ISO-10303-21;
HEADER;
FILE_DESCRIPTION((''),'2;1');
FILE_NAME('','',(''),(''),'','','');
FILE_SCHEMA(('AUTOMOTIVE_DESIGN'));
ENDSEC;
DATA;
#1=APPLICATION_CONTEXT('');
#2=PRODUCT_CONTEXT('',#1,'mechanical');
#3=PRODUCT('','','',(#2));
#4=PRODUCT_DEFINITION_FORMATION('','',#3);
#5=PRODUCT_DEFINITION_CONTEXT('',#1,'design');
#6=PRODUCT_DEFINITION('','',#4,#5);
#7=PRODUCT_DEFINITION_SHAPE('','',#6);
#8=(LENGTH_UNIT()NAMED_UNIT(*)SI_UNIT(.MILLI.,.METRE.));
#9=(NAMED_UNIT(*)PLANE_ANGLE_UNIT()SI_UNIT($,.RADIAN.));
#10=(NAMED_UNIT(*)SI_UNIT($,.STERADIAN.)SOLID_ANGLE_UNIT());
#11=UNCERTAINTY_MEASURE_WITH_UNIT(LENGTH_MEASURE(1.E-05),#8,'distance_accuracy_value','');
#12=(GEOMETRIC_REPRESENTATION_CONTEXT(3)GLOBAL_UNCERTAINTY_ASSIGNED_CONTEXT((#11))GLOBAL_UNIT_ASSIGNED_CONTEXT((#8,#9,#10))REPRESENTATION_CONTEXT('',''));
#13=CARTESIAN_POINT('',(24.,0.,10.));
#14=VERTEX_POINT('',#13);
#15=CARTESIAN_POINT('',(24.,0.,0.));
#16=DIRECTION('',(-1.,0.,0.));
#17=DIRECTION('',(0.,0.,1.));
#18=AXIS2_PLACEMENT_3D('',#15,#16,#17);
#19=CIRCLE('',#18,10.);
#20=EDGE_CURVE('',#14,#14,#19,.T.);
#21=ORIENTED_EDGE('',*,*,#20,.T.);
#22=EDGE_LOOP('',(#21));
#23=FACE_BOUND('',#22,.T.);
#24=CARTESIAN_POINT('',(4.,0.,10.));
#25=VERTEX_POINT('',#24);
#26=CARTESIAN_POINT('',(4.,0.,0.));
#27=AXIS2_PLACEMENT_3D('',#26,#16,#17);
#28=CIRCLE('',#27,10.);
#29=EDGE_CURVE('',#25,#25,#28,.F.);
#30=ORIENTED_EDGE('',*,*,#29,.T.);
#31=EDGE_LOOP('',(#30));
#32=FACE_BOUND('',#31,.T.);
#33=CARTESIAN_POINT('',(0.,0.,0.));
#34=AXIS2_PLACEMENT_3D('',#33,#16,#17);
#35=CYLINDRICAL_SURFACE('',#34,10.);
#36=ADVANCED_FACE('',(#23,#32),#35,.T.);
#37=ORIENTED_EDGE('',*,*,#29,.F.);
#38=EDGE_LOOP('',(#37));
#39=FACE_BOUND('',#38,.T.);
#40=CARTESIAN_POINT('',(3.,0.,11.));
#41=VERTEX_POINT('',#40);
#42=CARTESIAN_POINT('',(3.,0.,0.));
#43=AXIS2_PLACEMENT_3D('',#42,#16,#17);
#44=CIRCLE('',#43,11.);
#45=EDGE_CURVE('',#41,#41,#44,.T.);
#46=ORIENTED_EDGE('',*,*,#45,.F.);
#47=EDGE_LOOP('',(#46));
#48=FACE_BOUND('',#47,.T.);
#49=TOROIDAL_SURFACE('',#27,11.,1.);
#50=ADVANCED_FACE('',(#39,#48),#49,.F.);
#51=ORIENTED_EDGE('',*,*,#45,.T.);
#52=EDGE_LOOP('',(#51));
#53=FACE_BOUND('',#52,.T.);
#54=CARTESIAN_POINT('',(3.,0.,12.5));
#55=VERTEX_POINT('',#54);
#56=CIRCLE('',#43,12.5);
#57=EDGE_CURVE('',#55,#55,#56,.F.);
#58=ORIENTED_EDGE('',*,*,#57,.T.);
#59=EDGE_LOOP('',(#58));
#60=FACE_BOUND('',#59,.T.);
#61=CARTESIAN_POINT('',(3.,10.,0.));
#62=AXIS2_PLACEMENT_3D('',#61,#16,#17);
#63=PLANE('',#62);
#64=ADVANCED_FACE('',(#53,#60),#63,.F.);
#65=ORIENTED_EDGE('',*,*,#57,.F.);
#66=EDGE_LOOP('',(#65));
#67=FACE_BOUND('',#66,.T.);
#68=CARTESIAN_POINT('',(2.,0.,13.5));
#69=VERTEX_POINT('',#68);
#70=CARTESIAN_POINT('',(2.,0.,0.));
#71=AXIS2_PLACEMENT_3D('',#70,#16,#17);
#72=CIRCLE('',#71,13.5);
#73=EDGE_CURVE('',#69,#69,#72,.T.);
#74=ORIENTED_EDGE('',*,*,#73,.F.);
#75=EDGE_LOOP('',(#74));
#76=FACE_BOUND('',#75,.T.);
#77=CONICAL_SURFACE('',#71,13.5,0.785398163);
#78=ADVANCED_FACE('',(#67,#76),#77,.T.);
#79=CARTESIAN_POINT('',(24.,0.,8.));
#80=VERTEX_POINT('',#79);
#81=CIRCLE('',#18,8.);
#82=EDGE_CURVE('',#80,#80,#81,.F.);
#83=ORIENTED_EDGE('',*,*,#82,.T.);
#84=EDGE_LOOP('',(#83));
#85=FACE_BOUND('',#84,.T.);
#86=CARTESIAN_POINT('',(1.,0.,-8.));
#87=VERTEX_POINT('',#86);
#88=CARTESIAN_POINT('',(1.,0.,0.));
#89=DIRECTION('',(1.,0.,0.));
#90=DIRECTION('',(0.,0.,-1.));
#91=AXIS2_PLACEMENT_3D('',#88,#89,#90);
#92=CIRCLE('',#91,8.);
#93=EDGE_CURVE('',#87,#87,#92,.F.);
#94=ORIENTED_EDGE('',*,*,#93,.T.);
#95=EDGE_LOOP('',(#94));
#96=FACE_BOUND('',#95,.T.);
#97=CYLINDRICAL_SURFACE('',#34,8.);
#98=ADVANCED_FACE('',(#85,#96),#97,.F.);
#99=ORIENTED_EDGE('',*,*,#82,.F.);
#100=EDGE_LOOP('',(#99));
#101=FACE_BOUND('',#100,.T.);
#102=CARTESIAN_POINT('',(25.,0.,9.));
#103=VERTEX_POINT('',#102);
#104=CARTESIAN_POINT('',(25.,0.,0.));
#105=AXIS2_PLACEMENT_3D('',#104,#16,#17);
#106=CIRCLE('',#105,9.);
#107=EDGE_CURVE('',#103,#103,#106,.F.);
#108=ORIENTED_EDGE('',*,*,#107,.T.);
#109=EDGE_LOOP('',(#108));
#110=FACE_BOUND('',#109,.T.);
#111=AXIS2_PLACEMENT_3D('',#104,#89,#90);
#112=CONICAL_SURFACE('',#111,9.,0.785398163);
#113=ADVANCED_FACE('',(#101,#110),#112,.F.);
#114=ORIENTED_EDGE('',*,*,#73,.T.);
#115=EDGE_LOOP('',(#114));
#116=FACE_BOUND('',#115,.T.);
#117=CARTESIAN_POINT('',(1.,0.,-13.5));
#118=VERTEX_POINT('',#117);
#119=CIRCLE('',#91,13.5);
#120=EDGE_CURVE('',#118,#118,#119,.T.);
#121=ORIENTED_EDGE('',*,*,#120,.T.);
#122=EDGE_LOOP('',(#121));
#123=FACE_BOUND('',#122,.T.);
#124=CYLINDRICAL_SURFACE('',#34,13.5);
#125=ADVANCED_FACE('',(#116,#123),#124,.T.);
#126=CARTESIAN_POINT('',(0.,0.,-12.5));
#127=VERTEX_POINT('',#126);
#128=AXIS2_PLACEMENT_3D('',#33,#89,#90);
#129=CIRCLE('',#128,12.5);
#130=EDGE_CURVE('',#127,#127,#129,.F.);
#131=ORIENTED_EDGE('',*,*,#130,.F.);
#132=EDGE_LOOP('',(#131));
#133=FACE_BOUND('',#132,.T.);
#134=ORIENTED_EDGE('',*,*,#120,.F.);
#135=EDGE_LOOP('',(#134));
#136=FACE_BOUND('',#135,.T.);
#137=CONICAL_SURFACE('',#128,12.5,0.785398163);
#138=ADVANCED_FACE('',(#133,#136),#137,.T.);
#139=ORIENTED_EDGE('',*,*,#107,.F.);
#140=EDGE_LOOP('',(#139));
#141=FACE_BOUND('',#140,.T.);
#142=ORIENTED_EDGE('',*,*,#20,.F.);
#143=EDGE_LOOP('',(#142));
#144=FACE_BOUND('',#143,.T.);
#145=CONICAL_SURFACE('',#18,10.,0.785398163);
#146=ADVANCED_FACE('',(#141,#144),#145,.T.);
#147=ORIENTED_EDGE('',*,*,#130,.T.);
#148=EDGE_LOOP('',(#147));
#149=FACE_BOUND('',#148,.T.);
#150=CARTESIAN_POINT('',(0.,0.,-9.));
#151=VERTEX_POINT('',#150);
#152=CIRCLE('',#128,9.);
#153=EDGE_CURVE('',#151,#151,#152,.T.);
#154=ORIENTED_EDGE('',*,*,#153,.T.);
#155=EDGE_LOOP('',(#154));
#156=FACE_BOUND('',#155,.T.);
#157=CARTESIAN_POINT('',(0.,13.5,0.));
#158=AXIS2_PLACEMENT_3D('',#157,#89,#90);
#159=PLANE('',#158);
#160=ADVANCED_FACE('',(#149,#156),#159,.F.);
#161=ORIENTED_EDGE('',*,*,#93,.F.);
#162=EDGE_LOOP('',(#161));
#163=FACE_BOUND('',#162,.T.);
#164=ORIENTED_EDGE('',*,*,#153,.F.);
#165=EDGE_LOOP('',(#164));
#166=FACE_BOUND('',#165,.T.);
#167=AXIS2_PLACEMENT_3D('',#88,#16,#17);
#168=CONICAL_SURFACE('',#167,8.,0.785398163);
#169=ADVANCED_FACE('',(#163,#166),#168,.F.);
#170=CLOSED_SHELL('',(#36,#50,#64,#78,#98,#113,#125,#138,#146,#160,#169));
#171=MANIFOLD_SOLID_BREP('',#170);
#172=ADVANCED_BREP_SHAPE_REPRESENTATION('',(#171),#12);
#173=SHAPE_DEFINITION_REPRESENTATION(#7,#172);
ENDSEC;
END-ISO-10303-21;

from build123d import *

# Parameters (mm, degrees)
CHAMFER1_SIZE = 1
FILLET1_R     = 1


with BuildPart() as part:
    # Sketch1 → Revolve1 (revolve)
    with BuildSketch(Plane.XY, mode=Mode.PRIVATE) as revolve1_sk:
        Polygon((0, 8), (25, 8), (25, 10), (3, 10), (3, 13.5), (0, 13.5), align=None)
    revolve(revolve1_sk.sketch.rotate(Axis((0, 0, 0), (1, 0, 0)), 90), axis=Axis((0, 0, 0), (1, 0, 0)))

    # Chamfer1
    chamfer1_edges = [part.edges().sort_by_distance(p)[0] for p in [
        (0, 0, -13.5),
        (3, 0, -13.5),
        (25, 0, -10),
        (25, 0, -8),
        (0, 0, -8),
    ]]
    chamfer(chamfer1_edges, length=CHAMFER1_SIZE - 0.0001)  # a hair under: the kernel refuses the full size

    # Fillet1
    fillet1_edges = [part.edges().sort_by_distance(p)[0] for p in [
        (3, 0, -10),
    ]]
    fillet(fillet1_edges, radius=FILLET1_R)


solid = part.part
